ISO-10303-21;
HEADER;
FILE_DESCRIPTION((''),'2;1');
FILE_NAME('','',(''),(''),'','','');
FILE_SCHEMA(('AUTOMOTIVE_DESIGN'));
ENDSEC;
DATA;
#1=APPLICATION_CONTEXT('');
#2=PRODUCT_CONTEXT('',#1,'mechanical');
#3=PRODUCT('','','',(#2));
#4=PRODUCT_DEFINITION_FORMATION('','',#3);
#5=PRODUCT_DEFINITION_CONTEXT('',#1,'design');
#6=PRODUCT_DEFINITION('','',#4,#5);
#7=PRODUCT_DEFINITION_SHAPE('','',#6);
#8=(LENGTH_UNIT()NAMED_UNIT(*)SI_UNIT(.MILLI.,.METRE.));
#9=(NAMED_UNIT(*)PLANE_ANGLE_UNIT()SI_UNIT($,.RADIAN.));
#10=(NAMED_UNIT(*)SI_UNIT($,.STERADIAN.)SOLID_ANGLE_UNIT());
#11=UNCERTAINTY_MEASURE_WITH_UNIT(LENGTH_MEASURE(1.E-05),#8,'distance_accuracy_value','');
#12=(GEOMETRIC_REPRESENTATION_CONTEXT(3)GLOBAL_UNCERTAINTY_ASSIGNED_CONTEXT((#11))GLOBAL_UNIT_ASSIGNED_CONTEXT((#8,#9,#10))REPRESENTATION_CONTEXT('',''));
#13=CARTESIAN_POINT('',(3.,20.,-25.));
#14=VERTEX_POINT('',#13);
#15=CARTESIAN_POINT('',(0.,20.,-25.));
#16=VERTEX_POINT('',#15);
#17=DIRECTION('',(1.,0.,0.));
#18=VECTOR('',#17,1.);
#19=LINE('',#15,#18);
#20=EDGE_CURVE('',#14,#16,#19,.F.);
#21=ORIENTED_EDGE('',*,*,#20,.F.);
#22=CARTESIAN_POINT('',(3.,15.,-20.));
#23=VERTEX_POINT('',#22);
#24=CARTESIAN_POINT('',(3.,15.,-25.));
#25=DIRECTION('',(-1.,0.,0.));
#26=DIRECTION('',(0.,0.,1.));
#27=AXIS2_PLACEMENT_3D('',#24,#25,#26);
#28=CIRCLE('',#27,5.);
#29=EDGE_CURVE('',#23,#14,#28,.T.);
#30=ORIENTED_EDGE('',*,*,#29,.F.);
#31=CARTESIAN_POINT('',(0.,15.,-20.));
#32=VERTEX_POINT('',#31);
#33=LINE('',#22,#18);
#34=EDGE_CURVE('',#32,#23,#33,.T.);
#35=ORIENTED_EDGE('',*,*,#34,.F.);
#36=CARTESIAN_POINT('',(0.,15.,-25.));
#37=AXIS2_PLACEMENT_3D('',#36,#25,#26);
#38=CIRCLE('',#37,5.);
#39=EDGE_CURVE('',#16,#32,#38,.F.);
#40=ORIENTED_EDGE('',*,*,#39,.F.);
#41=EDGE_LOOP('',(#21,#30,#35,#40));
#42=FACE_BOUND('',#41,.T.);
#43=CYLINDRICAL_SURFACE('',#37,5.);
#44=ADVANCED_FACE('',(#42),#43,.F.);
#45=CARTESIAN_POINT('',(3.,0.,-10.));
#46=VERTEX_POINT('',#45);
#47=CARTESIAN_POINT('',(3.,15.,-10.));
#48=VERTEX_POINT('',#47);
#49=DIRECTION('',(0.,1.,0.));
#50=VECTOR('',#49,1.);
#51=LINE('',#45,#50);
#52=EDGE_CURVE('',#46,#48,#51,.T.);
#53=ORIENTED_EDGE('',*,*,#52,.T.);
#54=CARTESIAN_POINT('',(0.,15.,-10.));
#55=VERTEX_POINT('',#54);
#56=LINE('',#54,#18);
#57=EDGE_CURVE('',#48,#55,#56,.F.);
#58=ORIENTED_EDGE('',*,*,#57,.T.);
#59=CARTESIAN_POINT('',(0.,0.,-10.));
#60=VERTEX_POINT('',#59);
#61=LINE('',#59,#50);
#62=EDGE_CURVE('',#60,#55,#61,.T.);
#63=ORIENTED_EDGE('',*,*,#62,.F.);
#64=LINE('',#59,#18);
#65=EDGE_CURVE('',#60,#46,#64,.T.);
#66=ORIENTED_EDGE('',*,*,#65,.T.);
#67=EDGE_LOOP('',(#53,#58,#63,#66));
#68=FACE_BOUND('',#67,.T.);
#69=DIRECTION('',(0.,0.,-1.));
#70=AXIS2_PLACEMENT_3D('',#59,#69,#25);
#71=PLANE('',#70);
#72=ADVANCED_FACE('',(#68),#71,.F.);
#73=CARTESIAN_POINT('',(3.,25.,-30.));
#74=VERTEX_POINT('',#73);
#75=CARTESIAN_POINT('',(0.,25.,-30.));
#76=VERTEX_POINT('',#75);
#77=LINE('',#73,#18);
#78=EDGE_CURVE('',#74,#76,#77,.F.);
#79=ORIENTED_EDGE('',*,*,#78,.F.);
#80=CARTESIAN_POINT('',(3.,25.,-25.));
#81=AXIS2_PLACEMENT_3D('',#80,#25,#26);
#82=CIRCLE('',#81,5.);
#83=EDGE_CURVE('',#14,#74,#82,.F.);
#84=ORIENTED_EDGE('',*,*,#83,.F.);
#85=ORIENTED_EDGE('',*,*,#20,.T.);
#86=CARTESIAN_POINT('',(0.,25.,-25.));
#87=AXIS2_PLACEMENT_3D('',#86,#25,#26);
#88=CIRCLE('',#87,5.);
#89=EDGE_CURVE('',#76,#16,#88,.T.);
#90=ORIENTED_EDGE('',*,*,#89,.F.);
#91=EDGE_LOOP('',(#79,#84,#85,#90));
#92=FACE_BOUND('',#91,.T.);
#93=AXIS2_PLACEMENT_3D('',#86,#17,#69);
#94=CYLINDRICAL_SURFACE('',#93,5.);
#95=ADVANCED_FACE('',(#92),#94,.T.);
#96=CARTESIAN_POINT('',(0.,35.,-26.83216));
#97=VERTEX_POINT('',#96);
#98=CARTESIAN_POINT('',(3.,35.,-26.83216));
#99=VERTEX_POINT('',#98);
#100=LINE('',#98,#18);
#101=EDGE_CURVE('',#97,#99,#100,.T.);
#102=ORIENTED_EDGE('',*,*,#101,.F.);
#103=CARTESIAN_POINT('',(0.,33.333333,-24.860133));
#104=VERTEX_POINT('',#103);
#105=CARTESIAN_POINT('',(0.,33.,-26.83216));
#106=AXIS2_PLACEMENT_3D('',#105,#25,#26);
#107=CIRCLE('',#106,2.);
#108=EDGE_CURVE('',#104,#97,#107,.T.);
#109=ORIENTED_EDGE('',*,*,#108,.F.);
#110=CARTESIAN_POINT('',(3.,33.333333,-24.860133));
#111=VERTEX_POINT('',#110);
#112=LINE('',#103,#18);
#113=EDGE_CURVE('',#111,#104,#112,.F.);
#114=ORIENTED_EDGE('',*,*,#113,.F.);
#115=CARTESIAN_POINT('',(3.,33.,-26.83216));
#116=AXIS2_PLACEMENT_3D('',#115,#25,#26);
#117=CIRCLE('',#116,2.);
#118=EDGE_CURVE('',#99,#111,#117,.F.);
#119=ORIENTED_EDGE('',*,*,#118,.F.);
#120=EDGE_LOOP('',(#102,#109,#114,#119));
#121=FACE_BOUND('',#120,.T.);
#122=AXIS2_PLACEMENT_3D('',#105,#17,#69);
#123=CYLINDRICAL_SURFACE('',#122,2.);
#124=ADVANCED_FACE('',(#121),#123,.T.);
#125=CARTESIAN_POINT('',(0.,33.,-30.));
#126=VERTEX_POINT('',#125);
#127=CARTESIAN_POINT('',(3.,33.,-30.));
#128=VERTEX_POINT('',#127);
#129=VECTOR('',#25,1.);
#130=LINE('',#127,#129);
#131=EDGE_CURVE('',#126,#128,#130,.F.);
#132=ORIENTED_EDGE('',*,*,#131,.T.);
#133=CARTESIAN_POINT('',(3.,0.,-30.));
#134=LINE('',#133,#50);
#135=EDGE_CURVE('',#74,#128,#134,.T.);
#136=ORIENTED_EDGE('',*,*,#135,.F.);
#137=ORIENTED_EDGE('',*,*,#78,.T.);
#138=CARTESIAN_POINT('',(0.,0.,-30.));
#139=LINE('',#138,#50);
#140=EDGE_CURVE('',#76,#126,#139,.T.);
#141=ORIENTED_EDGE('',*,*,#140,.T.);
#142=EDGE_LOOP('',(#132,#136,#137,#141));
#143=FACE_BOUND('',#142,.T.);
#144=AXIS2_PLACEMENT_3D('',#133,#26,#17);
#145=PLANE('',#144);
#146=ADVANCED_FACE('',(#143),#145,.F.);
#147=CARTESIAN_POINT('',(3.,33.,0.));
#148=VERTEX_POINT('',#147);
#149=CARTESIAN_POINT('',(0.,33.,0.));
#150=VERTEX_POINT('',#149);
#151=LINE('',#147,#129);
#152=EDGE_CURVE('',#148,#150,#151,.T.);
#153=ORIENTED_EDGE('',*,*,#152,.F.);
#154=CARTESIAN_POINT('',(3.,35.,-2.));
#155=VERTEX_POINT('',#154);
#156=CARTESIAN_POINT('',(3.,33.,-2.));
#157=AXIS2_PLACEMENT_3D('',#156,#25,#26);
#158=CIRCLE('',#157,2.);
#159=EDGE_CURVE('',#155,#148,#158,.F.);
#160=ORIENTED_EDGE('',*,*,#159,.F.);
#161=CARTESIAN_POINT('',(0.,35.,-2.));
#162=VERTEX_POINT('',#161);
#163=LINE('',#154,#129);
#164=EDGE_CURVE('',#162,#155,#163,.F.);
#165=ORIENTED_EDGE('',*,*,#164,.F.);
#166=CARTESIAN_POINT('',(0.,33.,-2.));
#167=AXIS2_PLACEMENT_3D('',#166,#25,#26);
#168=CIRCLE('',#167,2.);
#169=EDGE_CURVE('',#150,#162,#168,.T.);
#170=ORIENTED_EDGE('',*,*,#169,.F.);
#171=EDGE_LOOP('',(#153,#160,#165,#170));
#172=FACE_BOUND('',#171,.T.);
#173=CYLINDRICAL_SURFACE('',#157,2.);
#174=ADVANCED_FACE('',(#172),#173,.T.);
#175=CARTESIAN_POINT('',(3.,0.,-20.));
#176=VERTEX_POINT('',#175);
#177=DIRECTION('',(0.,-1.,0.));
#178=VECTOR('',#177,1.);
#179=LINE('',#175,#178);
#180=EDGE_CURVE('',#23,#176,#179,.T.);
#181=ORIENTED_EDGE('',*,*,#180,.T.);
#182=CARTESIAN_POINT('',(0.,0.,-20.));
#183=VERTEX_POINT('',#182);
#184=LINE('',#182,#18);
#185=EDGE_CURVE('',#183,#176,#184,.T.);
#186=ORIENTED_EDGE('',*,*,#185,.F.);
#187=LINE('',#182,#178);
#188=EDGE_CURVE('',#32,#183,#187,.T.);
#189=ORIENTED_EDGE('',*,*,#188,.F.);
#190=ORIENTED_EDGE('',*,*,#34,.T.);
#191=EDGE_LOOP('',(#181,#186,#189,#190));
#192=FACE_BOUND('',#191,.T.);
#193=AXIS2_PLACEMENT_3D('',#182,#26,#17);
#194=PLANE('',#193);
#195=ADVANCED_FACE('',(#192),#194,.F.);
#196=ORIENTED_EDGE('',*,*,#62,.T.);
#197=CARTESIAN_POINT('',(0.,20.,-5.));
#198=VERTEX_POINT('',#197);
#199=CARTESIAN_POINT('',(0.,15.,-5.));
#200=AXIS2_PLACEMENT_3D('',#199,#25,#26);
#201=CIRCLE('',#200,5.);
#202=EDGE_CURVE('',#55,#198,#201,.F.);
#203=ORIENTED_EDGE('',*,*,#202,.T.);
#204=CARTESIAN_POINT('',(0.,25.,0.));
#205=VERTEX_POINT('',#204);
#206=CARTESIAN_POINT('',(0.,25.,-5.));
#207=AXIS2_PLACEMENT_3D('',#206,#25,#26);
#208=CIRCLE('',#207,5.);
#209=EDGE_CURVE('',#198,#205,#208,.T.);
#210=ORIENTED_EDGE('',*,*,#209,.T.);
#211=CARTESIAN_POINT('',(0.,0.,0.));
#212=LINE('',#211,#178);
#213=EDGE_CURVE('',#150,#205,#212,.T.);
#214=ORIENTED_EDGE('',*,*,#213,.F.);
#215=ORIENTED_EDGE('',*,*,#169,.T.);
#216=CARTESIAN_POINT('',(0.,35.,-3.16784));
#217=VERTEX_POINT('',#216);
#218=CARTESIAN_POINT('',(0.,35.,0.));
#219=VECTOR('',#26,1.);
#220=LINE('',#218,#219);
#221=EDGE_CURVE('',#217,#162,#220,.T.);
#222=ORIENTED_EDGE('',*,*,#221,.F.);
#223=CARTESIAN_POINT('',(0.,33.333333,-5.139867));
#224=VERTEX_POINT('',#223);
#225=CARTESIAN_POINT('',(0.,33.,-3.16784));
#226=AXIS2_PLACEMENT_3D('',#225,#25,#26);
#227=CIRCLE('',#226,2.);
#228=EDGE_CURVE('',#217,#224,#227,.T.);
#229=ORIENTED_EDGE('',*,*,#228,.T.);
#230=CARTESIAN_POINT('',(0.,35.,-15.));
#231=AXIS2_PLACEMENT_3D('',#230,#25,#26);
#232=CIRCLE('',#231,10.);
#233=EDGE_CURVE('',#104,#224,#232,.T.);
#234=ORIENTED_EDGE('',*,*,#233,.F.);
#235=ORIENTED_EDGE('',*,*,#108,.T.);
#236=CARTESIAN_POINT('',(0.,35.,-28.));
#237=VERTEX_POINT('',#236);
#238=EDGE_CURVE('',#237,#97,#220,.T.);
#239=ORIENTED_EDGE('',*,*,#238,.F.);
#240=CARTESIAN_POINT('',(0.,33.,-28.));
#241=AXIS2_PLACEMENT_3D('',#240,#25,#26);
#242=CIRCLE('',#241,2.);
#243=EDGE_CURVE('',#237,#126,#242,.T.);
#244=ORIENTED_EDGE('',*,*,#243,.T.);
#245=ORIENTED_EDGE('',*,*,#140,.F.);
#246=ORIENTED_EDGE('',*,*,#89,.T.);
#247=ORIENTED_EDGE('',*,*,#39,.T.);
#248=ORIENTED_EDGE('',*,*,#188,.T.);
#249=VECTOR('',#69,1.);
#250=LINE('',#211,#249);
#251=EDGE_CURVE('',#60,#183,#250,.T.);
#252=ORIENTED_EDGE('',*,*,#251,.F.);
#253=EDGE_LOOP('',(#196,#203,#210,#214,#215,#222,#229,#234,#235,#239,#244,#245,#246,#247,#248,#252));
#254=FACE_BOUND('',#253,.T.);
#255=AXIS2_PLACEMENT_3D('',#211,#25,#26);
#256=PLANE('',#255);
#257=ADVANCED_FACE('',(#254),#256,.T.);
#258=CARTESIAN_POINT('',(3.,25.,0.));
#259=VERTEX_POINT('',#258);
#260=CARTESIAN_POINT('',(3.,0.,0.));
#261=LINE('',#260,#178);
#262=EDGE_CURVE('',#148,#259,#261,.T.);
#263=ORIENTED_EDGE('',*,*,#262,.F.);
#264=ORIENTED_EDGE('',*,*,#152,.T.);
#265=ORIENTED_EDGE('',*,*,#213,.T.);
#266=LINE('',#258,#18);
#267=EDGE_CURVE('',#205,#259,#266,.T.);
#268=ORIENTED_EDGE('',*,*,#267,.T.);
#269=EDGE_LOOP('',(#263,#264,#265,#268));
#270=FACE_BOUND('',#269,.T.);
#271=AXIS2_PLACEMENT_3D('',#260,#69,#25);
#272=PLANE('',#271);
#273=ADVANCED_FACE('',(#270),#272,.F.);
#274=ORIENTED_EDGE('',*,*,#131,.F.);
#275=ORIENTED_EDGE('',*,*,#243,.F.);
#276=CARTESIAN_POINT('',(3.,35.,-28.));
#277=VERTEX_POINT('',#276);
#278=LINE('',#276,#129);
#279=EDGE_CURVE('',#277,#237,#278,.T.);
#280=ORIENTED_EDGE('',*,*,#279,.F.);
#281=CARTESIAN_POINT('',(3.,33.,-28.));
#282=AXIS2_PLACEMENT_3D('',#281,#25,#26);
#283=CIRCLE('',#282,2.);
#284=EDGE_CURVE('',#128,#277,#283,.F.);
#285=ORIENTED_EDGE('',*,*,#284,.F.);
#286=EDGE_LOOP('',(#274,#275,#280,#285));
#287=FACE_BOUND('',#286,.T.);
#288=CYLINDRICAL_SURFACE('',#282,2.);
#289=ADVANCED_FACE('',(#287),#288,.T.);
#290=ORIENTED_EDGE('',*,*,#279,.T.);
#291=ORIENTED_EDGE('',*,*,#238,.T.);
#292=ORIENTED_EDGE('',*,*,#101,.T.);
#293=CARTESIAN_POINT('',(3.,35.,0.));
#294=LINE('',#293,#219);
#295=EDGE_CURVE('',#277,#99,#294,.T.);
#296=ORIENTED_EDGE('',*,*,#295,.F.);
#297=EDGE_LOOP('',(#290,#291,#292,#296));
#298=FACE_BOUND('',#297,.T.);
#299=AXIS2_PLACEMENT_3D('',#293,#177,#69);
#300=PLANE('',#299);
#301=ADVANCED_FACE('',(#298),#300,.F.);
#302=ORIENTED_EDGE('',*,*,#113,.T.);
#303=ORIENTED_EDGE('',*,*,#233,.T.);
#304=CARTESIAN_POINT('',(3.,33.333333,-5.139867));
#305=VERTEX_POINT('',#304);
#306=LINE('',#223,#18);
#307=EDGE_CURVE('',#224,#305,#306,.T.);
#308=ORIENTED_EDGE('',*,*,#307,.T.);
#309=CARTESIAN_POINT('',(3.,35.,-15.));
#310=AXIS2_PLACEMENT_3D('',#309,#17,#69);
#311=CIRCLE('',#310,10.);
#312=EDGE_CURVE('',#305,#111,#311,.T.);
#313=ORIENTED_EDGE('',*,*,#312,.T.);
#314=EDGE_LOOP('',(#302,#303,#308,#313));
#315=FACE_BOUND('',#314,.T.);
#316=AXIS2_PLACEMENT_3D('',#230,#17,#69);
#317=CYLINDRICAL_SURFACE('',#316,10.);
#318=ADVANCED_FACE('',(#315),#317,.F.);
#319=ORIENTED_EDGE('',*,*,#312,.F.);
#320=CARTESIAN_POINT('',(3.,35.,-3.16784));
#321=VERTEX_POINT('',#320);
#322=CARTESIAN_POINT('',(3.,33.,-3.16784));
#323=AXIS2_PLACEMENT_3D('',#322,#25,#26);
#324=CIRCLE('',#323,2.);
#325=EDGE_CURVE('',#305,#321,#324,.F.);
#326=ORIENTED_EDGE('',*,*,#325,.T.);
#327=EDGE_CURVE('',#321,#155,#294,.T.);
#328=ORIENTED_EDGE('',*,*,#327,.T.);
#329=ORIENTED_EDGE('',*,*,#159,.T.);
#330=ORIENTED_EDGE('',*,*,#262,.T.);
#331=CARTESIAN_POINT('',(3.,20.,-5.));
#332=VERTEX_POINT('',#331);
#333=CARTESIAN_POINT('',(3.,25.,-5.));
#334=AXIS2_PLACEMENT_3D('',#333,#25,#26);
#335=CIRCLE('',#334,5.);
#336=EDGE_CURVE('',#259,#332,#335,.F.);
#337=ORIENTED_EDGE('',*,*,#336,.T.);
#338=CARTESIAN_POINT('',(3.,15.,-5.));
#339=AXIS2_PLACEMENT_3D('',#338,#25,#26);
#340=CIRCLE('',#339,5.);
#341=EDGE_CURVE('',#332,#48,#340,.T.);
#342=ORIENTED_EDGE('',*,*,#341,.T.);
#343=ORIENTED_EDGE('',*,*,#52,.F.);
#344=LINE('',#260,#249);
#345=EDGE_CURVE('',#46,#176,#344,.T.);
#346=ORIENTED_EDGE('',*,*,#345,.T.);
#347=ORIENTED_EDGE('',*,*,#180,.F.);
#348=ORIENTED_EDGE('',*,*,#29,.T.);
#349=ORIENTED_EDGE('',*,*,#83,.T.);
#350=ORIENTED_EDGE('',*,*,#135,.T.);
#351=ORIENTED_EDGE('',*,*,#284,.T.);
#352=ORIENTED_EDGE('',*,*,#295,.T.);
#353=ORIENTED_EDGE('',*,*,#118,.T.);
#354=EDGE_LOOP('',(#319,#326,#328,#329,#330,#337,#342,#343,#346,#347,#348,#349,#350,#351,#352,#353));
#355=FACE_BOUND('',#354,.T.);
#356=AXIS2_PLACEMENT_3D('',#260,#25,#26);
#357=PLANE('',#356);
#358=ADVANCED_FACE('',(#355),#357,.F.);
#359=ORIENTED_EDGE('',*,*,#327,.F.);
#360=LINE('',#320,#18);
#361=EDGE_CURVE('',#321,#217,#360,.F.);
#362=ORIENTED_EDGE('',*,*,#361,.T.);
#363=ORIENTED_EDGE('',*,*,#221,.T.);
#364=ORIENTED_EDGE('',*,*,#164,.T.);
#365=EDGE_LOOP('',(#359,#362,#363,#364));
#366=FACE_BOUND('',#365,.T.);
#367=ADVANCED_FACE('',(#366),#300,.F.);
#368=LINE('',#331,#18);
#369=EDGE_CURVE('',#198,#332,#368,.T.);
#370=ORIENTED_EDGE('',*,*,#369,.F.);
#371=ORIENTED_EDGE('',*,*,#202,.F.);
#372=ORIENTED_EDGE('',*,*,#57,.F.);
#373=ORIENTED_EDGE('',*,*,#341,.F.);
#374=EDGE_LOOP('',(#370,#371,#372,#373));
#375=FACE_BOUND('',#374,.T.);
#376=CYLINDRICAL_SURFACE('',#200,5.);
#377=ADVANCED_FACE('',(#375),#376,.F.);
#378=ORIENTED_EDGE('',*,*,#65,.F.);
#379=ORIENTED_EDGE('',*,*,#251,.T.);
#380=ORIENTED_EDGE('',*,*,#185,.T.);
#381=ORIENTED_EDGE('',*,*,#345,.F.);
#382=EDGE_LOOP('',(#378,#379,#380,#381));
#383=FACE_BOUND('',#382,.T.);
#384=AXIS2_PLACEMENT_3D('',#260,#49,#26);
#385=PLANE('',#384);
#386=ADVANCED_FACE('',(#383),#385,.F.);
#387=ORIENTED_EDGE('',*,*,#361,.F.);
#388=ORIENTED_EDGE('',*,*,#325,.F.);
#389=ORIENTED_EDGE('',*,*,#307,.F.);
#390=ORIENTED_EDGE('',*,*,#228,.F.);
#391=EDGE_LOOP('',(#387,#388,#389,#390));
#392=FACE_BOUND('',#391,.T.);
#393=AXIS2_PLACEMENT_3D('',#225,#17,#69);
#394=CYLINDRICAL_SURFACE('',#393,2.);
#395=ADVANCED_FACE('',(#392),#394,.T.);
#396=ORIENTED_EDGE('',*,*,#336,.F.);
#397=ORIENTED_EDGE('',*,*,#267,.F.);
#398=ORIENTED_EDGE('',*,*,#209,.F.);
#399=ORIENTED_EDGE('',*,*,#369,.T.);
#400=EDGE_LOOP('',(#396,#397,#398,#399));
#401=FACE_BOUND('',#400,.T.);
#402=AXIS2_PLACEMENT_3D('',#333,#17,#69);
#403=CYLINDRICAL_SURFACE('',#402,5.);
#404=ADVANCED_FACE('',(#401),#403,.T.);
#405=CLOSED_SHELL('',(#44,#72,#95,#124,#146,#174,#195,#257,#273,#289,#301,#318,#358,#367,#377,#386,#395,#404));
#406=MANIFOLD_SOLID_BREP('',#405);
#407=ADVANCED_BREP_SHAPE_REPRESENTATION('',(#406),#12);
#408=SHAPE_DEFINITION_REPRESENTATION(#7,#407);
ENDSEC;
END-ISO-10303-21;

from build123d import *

# Parameters (mm, degrees)
SKETCH1_W           = 30
SKETCH1_H           = 35
BOSS_EXTRUDE1_DEPTH = 3
SKETCH2_W           = 10
SKETCH2_H           = 20
CUT_EXTRUDE1_DEPTH  = 3
SKETCH5_R           = 10
CUT_EXTRUDE2_DEPTH  = 3
FILLET1_DEPTH       = 3
FILLET1_2_DEPTH     = 3
FILLET2_R           = 2


with BuildPart() as part:
    # Sketch1 → Boss-Extrude1 (new body)
    with BuildSketch(Plane(origin=(0, 0, 0), x_dir=(0, 0, -1), z_dir=(1, 0, 0))):
        with Locations((15, 17.5)):
            Rectangle(SKETCH1_W, SKETCH1_H)
    extrude(amount=BOSS_EXTRUDE1_DEPTH)

    # Sketch2 → Cut-Extrude1 (cut)
    with BuildSketch(Plane(origin=(3, 0, 0), x_dir=(0, 0, -1), z_dir=(1, 0, 0))):
        with Locations((5, 10)):
            Rectangle(SKETCH2_W, SKETCH2_H)
        with Locations((25, 10)):
            Rectangle(SKETCH2_W, SKETCH2_H)
    extrude(amount=-CUT_EXTRUDE1_DEPTH, mode=Mode.SUBTRACT)

    # Sketch5 → Cut-Extrude2 (cut)
    with BuildSketch(Plane(origin=(3, 0, 0), x_dir=(0, 0, -1), z_dir=(1, 0, 0))):
        with Locations((15, 35)):
            Circle(SKETCH5_R)
    extrude(amount=-CUT_EXTRUDE2_DEPTH, mode=Mode.SUBTRACT)

    # Fillet1: read off the stored shape, not the designer's step
    # Fillet1 outline → Fillet1 (cut)
    with BuildSketch(Plane.YZ):
        with BuildLine():
            ThreePointArc((25, -30), (21.464466094, -28.535533906), (20, -25))
            Line((20, -25), (20, -30))
            Line((20, -30), (25, -30))
        make_face()
        with BuildLine():
            Line((20, 0), (20, -5))
            ThreePointArc((20, -5), (21.464466094, -1.464466094), (25, 0))
            Line((25, 0), (20, 0))
        make_face()
    extrude(amount=FILLET1_DEPTH, mode=Mode.SUBTRACT)

    # Fillet1 2 outline → Fillet1 2 (add)
    with BuildSketch(Plane.YZ):
        with BuildLine():
            Line((20, -20), (15, -20))
            ThreePointArc((15, -20), (18.535533906, -21.464466094), (20, -25))
            Line((20, -25), (20, -20))
        make_face()
        with BuildLine():
            Line((20, -10), (20, -5))
            ThreePointArc((20, -5), (18.535533906, -8.535533906), (15, -10))
            Line((15, -10), (20, -10))
        make_face()
    extrude(amount=FILLET1_2_DEPTH)

    # Fillet2
    fillet2_edges = [part.edges().sort_by_distance(p)[0] for p in [
        (1.5, 35, -25),
        (1.5, 35, -5),
        (1.5, 35, 0),
        (1.5, 35, -30),
    ]]
    fillet(fillet2_edges, radius=FILLET2_R)


solid = part.part
